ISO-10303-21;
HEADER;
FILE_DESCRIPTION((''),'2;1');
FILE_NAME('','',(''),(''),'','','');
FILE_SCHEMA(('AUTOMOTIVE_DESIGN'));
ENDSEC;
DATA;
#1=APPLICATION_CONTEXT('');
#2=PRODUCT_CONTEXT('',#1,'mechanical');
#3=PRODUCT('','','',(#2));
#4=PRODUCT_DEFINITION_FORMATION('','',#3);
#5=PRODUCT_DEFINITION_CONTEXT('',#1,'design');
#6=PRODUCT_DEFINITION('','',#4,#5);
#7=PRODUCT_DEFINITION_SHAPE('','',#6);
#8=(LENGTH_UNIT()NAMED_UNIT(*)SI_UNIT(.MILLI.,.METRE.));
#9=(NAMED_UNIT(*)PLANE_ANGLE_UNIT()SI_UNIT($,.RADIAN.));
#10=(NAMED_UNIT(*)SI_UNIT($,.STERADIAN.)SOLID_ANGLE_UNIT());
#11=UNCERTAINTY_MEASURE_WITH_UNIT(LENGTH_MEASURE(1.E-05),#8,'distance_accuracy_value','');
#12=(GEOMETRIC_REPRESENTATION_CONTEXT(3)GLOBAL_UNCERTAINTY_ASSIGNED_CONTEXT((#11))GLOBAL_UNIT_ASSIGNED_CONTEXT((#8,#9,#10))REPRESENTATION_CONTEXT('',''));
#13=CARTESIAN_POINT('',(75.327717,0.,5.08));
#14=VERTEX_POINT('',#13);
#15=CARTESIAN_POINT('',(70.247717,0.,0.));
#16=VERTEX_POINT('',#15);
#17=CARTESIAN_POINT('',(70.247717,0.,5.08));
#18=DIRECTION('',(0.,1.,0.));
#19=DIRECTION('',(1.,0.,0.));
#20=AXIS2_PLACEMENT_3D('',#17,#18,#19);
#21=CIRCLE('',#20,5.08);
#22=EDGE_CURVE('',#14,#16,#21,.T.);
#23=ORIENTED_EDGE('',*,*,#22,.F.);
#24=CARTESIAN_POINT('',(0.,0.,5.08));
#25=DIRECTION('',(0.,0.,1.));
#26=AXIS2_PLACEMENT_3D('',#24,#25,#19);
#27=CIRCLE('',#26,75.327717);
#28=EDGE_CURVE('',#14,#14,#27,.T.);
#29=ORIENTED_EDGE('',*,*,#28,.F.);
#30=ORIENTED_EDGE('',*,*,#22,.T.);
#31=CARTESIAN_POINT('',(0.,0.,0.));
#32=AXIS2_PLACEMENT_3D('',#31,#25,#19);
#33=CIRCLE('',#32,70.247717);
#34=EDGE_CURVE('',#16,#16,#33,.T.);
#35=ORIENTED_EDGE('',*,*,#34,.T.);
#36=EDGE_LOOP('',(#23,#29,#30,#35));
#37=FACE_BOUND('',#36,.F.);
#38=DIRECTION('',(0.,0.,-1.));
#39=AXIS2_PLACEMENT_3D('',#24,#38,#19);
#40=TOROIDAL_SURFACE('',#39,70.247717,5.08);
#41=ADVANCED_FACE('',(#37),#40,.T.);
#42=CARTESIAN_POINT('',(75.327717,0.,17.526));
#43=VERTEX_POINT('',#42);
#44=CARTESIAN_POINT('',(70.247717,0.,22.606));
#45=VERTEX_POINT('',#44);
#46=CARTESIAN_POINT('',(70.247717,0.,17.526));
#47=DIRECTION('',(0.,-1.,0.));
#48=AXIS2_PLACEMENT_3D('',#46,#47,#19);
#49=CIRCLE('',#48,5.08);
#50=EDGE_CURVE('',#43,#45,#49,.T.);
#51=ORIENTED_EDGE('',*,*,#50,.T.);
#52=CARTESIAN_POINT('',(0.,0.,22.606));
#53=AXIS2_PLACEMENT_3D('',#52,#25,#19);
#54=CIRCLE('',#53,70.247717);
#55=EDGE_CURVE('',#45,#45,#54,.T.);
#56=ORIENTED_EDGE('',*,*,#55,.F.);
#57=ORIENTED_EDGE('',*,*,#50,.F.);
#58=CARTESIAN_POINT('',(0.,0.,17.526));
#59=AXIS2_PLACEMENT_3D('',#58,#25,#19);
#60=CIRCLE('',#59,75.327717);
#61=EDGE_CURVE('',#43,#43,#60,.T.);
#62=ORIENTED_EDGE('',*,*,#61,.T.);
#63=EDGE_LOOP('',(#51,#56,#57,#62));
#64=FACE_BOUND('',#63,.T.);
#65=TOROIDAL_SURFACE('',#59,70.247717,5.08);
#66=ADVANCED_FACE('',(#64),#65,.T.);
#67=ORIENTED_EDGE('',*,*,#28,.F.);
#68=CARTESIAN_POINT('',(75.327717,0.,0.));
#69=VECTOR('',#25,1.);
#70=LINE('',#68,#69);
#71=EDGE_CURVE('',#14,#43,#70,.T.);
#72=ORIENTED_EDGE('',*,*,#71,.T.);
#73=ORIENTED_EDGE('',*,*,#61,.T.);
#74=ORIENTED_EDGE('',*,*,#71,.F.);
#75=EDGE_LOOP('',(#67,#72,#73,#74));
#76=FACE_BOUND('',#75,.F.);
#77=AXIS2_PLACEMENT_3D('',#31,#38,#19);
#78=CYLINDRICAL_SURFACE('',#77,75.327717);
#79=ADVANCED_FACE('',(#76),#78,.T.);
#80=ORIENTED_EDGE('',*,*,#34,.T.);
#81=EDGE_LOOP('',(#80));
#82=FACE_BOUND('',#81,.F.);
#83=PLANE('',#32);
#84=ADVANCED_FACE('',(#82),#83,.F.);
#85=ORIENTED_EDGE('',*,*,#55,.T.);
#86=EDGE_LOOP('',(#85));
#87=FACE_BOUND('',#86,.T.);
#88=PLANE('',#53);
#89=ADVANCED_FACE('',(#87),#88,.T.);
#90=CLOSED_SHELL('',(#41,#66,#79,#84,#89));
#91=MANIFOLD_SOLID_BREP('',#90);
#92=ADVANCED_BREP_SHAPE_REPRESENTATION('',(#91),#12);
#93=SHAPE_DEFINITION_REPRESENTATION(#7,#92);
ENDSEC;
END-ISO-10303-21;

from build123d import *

# Parameters (mm, degrees)
F0_R     = 75.3277173883
F1_DEPTH = 22.606
F2_R     = 5.08
F3_R     = 5.08


with BuildPart() as f1:
    # F0 (on Top) → F1 (new body)
    with BuildSketch(Plane.XY):
        Circle(F0_R)
    extrude(amount=F1_DEPTH)

    # F2
    f2_edges = [f1.edges().sort_by_distance(p)[0] for p in [
        (-75.327717, 0, 0),
    ]]
    fillet(f2_edges, radius=F2_R)

    # F3
    f3_edges = [f1.edges().sort_by_distance(p)[0] for p in [
        (75.327717, 0, 13.843),
        (-75.327717, 0, 5.08),
        (-75.327717, 0, 22.606),
    ]]
    fillet(f3_edges, radius=F3_R)


solid = f1.part
